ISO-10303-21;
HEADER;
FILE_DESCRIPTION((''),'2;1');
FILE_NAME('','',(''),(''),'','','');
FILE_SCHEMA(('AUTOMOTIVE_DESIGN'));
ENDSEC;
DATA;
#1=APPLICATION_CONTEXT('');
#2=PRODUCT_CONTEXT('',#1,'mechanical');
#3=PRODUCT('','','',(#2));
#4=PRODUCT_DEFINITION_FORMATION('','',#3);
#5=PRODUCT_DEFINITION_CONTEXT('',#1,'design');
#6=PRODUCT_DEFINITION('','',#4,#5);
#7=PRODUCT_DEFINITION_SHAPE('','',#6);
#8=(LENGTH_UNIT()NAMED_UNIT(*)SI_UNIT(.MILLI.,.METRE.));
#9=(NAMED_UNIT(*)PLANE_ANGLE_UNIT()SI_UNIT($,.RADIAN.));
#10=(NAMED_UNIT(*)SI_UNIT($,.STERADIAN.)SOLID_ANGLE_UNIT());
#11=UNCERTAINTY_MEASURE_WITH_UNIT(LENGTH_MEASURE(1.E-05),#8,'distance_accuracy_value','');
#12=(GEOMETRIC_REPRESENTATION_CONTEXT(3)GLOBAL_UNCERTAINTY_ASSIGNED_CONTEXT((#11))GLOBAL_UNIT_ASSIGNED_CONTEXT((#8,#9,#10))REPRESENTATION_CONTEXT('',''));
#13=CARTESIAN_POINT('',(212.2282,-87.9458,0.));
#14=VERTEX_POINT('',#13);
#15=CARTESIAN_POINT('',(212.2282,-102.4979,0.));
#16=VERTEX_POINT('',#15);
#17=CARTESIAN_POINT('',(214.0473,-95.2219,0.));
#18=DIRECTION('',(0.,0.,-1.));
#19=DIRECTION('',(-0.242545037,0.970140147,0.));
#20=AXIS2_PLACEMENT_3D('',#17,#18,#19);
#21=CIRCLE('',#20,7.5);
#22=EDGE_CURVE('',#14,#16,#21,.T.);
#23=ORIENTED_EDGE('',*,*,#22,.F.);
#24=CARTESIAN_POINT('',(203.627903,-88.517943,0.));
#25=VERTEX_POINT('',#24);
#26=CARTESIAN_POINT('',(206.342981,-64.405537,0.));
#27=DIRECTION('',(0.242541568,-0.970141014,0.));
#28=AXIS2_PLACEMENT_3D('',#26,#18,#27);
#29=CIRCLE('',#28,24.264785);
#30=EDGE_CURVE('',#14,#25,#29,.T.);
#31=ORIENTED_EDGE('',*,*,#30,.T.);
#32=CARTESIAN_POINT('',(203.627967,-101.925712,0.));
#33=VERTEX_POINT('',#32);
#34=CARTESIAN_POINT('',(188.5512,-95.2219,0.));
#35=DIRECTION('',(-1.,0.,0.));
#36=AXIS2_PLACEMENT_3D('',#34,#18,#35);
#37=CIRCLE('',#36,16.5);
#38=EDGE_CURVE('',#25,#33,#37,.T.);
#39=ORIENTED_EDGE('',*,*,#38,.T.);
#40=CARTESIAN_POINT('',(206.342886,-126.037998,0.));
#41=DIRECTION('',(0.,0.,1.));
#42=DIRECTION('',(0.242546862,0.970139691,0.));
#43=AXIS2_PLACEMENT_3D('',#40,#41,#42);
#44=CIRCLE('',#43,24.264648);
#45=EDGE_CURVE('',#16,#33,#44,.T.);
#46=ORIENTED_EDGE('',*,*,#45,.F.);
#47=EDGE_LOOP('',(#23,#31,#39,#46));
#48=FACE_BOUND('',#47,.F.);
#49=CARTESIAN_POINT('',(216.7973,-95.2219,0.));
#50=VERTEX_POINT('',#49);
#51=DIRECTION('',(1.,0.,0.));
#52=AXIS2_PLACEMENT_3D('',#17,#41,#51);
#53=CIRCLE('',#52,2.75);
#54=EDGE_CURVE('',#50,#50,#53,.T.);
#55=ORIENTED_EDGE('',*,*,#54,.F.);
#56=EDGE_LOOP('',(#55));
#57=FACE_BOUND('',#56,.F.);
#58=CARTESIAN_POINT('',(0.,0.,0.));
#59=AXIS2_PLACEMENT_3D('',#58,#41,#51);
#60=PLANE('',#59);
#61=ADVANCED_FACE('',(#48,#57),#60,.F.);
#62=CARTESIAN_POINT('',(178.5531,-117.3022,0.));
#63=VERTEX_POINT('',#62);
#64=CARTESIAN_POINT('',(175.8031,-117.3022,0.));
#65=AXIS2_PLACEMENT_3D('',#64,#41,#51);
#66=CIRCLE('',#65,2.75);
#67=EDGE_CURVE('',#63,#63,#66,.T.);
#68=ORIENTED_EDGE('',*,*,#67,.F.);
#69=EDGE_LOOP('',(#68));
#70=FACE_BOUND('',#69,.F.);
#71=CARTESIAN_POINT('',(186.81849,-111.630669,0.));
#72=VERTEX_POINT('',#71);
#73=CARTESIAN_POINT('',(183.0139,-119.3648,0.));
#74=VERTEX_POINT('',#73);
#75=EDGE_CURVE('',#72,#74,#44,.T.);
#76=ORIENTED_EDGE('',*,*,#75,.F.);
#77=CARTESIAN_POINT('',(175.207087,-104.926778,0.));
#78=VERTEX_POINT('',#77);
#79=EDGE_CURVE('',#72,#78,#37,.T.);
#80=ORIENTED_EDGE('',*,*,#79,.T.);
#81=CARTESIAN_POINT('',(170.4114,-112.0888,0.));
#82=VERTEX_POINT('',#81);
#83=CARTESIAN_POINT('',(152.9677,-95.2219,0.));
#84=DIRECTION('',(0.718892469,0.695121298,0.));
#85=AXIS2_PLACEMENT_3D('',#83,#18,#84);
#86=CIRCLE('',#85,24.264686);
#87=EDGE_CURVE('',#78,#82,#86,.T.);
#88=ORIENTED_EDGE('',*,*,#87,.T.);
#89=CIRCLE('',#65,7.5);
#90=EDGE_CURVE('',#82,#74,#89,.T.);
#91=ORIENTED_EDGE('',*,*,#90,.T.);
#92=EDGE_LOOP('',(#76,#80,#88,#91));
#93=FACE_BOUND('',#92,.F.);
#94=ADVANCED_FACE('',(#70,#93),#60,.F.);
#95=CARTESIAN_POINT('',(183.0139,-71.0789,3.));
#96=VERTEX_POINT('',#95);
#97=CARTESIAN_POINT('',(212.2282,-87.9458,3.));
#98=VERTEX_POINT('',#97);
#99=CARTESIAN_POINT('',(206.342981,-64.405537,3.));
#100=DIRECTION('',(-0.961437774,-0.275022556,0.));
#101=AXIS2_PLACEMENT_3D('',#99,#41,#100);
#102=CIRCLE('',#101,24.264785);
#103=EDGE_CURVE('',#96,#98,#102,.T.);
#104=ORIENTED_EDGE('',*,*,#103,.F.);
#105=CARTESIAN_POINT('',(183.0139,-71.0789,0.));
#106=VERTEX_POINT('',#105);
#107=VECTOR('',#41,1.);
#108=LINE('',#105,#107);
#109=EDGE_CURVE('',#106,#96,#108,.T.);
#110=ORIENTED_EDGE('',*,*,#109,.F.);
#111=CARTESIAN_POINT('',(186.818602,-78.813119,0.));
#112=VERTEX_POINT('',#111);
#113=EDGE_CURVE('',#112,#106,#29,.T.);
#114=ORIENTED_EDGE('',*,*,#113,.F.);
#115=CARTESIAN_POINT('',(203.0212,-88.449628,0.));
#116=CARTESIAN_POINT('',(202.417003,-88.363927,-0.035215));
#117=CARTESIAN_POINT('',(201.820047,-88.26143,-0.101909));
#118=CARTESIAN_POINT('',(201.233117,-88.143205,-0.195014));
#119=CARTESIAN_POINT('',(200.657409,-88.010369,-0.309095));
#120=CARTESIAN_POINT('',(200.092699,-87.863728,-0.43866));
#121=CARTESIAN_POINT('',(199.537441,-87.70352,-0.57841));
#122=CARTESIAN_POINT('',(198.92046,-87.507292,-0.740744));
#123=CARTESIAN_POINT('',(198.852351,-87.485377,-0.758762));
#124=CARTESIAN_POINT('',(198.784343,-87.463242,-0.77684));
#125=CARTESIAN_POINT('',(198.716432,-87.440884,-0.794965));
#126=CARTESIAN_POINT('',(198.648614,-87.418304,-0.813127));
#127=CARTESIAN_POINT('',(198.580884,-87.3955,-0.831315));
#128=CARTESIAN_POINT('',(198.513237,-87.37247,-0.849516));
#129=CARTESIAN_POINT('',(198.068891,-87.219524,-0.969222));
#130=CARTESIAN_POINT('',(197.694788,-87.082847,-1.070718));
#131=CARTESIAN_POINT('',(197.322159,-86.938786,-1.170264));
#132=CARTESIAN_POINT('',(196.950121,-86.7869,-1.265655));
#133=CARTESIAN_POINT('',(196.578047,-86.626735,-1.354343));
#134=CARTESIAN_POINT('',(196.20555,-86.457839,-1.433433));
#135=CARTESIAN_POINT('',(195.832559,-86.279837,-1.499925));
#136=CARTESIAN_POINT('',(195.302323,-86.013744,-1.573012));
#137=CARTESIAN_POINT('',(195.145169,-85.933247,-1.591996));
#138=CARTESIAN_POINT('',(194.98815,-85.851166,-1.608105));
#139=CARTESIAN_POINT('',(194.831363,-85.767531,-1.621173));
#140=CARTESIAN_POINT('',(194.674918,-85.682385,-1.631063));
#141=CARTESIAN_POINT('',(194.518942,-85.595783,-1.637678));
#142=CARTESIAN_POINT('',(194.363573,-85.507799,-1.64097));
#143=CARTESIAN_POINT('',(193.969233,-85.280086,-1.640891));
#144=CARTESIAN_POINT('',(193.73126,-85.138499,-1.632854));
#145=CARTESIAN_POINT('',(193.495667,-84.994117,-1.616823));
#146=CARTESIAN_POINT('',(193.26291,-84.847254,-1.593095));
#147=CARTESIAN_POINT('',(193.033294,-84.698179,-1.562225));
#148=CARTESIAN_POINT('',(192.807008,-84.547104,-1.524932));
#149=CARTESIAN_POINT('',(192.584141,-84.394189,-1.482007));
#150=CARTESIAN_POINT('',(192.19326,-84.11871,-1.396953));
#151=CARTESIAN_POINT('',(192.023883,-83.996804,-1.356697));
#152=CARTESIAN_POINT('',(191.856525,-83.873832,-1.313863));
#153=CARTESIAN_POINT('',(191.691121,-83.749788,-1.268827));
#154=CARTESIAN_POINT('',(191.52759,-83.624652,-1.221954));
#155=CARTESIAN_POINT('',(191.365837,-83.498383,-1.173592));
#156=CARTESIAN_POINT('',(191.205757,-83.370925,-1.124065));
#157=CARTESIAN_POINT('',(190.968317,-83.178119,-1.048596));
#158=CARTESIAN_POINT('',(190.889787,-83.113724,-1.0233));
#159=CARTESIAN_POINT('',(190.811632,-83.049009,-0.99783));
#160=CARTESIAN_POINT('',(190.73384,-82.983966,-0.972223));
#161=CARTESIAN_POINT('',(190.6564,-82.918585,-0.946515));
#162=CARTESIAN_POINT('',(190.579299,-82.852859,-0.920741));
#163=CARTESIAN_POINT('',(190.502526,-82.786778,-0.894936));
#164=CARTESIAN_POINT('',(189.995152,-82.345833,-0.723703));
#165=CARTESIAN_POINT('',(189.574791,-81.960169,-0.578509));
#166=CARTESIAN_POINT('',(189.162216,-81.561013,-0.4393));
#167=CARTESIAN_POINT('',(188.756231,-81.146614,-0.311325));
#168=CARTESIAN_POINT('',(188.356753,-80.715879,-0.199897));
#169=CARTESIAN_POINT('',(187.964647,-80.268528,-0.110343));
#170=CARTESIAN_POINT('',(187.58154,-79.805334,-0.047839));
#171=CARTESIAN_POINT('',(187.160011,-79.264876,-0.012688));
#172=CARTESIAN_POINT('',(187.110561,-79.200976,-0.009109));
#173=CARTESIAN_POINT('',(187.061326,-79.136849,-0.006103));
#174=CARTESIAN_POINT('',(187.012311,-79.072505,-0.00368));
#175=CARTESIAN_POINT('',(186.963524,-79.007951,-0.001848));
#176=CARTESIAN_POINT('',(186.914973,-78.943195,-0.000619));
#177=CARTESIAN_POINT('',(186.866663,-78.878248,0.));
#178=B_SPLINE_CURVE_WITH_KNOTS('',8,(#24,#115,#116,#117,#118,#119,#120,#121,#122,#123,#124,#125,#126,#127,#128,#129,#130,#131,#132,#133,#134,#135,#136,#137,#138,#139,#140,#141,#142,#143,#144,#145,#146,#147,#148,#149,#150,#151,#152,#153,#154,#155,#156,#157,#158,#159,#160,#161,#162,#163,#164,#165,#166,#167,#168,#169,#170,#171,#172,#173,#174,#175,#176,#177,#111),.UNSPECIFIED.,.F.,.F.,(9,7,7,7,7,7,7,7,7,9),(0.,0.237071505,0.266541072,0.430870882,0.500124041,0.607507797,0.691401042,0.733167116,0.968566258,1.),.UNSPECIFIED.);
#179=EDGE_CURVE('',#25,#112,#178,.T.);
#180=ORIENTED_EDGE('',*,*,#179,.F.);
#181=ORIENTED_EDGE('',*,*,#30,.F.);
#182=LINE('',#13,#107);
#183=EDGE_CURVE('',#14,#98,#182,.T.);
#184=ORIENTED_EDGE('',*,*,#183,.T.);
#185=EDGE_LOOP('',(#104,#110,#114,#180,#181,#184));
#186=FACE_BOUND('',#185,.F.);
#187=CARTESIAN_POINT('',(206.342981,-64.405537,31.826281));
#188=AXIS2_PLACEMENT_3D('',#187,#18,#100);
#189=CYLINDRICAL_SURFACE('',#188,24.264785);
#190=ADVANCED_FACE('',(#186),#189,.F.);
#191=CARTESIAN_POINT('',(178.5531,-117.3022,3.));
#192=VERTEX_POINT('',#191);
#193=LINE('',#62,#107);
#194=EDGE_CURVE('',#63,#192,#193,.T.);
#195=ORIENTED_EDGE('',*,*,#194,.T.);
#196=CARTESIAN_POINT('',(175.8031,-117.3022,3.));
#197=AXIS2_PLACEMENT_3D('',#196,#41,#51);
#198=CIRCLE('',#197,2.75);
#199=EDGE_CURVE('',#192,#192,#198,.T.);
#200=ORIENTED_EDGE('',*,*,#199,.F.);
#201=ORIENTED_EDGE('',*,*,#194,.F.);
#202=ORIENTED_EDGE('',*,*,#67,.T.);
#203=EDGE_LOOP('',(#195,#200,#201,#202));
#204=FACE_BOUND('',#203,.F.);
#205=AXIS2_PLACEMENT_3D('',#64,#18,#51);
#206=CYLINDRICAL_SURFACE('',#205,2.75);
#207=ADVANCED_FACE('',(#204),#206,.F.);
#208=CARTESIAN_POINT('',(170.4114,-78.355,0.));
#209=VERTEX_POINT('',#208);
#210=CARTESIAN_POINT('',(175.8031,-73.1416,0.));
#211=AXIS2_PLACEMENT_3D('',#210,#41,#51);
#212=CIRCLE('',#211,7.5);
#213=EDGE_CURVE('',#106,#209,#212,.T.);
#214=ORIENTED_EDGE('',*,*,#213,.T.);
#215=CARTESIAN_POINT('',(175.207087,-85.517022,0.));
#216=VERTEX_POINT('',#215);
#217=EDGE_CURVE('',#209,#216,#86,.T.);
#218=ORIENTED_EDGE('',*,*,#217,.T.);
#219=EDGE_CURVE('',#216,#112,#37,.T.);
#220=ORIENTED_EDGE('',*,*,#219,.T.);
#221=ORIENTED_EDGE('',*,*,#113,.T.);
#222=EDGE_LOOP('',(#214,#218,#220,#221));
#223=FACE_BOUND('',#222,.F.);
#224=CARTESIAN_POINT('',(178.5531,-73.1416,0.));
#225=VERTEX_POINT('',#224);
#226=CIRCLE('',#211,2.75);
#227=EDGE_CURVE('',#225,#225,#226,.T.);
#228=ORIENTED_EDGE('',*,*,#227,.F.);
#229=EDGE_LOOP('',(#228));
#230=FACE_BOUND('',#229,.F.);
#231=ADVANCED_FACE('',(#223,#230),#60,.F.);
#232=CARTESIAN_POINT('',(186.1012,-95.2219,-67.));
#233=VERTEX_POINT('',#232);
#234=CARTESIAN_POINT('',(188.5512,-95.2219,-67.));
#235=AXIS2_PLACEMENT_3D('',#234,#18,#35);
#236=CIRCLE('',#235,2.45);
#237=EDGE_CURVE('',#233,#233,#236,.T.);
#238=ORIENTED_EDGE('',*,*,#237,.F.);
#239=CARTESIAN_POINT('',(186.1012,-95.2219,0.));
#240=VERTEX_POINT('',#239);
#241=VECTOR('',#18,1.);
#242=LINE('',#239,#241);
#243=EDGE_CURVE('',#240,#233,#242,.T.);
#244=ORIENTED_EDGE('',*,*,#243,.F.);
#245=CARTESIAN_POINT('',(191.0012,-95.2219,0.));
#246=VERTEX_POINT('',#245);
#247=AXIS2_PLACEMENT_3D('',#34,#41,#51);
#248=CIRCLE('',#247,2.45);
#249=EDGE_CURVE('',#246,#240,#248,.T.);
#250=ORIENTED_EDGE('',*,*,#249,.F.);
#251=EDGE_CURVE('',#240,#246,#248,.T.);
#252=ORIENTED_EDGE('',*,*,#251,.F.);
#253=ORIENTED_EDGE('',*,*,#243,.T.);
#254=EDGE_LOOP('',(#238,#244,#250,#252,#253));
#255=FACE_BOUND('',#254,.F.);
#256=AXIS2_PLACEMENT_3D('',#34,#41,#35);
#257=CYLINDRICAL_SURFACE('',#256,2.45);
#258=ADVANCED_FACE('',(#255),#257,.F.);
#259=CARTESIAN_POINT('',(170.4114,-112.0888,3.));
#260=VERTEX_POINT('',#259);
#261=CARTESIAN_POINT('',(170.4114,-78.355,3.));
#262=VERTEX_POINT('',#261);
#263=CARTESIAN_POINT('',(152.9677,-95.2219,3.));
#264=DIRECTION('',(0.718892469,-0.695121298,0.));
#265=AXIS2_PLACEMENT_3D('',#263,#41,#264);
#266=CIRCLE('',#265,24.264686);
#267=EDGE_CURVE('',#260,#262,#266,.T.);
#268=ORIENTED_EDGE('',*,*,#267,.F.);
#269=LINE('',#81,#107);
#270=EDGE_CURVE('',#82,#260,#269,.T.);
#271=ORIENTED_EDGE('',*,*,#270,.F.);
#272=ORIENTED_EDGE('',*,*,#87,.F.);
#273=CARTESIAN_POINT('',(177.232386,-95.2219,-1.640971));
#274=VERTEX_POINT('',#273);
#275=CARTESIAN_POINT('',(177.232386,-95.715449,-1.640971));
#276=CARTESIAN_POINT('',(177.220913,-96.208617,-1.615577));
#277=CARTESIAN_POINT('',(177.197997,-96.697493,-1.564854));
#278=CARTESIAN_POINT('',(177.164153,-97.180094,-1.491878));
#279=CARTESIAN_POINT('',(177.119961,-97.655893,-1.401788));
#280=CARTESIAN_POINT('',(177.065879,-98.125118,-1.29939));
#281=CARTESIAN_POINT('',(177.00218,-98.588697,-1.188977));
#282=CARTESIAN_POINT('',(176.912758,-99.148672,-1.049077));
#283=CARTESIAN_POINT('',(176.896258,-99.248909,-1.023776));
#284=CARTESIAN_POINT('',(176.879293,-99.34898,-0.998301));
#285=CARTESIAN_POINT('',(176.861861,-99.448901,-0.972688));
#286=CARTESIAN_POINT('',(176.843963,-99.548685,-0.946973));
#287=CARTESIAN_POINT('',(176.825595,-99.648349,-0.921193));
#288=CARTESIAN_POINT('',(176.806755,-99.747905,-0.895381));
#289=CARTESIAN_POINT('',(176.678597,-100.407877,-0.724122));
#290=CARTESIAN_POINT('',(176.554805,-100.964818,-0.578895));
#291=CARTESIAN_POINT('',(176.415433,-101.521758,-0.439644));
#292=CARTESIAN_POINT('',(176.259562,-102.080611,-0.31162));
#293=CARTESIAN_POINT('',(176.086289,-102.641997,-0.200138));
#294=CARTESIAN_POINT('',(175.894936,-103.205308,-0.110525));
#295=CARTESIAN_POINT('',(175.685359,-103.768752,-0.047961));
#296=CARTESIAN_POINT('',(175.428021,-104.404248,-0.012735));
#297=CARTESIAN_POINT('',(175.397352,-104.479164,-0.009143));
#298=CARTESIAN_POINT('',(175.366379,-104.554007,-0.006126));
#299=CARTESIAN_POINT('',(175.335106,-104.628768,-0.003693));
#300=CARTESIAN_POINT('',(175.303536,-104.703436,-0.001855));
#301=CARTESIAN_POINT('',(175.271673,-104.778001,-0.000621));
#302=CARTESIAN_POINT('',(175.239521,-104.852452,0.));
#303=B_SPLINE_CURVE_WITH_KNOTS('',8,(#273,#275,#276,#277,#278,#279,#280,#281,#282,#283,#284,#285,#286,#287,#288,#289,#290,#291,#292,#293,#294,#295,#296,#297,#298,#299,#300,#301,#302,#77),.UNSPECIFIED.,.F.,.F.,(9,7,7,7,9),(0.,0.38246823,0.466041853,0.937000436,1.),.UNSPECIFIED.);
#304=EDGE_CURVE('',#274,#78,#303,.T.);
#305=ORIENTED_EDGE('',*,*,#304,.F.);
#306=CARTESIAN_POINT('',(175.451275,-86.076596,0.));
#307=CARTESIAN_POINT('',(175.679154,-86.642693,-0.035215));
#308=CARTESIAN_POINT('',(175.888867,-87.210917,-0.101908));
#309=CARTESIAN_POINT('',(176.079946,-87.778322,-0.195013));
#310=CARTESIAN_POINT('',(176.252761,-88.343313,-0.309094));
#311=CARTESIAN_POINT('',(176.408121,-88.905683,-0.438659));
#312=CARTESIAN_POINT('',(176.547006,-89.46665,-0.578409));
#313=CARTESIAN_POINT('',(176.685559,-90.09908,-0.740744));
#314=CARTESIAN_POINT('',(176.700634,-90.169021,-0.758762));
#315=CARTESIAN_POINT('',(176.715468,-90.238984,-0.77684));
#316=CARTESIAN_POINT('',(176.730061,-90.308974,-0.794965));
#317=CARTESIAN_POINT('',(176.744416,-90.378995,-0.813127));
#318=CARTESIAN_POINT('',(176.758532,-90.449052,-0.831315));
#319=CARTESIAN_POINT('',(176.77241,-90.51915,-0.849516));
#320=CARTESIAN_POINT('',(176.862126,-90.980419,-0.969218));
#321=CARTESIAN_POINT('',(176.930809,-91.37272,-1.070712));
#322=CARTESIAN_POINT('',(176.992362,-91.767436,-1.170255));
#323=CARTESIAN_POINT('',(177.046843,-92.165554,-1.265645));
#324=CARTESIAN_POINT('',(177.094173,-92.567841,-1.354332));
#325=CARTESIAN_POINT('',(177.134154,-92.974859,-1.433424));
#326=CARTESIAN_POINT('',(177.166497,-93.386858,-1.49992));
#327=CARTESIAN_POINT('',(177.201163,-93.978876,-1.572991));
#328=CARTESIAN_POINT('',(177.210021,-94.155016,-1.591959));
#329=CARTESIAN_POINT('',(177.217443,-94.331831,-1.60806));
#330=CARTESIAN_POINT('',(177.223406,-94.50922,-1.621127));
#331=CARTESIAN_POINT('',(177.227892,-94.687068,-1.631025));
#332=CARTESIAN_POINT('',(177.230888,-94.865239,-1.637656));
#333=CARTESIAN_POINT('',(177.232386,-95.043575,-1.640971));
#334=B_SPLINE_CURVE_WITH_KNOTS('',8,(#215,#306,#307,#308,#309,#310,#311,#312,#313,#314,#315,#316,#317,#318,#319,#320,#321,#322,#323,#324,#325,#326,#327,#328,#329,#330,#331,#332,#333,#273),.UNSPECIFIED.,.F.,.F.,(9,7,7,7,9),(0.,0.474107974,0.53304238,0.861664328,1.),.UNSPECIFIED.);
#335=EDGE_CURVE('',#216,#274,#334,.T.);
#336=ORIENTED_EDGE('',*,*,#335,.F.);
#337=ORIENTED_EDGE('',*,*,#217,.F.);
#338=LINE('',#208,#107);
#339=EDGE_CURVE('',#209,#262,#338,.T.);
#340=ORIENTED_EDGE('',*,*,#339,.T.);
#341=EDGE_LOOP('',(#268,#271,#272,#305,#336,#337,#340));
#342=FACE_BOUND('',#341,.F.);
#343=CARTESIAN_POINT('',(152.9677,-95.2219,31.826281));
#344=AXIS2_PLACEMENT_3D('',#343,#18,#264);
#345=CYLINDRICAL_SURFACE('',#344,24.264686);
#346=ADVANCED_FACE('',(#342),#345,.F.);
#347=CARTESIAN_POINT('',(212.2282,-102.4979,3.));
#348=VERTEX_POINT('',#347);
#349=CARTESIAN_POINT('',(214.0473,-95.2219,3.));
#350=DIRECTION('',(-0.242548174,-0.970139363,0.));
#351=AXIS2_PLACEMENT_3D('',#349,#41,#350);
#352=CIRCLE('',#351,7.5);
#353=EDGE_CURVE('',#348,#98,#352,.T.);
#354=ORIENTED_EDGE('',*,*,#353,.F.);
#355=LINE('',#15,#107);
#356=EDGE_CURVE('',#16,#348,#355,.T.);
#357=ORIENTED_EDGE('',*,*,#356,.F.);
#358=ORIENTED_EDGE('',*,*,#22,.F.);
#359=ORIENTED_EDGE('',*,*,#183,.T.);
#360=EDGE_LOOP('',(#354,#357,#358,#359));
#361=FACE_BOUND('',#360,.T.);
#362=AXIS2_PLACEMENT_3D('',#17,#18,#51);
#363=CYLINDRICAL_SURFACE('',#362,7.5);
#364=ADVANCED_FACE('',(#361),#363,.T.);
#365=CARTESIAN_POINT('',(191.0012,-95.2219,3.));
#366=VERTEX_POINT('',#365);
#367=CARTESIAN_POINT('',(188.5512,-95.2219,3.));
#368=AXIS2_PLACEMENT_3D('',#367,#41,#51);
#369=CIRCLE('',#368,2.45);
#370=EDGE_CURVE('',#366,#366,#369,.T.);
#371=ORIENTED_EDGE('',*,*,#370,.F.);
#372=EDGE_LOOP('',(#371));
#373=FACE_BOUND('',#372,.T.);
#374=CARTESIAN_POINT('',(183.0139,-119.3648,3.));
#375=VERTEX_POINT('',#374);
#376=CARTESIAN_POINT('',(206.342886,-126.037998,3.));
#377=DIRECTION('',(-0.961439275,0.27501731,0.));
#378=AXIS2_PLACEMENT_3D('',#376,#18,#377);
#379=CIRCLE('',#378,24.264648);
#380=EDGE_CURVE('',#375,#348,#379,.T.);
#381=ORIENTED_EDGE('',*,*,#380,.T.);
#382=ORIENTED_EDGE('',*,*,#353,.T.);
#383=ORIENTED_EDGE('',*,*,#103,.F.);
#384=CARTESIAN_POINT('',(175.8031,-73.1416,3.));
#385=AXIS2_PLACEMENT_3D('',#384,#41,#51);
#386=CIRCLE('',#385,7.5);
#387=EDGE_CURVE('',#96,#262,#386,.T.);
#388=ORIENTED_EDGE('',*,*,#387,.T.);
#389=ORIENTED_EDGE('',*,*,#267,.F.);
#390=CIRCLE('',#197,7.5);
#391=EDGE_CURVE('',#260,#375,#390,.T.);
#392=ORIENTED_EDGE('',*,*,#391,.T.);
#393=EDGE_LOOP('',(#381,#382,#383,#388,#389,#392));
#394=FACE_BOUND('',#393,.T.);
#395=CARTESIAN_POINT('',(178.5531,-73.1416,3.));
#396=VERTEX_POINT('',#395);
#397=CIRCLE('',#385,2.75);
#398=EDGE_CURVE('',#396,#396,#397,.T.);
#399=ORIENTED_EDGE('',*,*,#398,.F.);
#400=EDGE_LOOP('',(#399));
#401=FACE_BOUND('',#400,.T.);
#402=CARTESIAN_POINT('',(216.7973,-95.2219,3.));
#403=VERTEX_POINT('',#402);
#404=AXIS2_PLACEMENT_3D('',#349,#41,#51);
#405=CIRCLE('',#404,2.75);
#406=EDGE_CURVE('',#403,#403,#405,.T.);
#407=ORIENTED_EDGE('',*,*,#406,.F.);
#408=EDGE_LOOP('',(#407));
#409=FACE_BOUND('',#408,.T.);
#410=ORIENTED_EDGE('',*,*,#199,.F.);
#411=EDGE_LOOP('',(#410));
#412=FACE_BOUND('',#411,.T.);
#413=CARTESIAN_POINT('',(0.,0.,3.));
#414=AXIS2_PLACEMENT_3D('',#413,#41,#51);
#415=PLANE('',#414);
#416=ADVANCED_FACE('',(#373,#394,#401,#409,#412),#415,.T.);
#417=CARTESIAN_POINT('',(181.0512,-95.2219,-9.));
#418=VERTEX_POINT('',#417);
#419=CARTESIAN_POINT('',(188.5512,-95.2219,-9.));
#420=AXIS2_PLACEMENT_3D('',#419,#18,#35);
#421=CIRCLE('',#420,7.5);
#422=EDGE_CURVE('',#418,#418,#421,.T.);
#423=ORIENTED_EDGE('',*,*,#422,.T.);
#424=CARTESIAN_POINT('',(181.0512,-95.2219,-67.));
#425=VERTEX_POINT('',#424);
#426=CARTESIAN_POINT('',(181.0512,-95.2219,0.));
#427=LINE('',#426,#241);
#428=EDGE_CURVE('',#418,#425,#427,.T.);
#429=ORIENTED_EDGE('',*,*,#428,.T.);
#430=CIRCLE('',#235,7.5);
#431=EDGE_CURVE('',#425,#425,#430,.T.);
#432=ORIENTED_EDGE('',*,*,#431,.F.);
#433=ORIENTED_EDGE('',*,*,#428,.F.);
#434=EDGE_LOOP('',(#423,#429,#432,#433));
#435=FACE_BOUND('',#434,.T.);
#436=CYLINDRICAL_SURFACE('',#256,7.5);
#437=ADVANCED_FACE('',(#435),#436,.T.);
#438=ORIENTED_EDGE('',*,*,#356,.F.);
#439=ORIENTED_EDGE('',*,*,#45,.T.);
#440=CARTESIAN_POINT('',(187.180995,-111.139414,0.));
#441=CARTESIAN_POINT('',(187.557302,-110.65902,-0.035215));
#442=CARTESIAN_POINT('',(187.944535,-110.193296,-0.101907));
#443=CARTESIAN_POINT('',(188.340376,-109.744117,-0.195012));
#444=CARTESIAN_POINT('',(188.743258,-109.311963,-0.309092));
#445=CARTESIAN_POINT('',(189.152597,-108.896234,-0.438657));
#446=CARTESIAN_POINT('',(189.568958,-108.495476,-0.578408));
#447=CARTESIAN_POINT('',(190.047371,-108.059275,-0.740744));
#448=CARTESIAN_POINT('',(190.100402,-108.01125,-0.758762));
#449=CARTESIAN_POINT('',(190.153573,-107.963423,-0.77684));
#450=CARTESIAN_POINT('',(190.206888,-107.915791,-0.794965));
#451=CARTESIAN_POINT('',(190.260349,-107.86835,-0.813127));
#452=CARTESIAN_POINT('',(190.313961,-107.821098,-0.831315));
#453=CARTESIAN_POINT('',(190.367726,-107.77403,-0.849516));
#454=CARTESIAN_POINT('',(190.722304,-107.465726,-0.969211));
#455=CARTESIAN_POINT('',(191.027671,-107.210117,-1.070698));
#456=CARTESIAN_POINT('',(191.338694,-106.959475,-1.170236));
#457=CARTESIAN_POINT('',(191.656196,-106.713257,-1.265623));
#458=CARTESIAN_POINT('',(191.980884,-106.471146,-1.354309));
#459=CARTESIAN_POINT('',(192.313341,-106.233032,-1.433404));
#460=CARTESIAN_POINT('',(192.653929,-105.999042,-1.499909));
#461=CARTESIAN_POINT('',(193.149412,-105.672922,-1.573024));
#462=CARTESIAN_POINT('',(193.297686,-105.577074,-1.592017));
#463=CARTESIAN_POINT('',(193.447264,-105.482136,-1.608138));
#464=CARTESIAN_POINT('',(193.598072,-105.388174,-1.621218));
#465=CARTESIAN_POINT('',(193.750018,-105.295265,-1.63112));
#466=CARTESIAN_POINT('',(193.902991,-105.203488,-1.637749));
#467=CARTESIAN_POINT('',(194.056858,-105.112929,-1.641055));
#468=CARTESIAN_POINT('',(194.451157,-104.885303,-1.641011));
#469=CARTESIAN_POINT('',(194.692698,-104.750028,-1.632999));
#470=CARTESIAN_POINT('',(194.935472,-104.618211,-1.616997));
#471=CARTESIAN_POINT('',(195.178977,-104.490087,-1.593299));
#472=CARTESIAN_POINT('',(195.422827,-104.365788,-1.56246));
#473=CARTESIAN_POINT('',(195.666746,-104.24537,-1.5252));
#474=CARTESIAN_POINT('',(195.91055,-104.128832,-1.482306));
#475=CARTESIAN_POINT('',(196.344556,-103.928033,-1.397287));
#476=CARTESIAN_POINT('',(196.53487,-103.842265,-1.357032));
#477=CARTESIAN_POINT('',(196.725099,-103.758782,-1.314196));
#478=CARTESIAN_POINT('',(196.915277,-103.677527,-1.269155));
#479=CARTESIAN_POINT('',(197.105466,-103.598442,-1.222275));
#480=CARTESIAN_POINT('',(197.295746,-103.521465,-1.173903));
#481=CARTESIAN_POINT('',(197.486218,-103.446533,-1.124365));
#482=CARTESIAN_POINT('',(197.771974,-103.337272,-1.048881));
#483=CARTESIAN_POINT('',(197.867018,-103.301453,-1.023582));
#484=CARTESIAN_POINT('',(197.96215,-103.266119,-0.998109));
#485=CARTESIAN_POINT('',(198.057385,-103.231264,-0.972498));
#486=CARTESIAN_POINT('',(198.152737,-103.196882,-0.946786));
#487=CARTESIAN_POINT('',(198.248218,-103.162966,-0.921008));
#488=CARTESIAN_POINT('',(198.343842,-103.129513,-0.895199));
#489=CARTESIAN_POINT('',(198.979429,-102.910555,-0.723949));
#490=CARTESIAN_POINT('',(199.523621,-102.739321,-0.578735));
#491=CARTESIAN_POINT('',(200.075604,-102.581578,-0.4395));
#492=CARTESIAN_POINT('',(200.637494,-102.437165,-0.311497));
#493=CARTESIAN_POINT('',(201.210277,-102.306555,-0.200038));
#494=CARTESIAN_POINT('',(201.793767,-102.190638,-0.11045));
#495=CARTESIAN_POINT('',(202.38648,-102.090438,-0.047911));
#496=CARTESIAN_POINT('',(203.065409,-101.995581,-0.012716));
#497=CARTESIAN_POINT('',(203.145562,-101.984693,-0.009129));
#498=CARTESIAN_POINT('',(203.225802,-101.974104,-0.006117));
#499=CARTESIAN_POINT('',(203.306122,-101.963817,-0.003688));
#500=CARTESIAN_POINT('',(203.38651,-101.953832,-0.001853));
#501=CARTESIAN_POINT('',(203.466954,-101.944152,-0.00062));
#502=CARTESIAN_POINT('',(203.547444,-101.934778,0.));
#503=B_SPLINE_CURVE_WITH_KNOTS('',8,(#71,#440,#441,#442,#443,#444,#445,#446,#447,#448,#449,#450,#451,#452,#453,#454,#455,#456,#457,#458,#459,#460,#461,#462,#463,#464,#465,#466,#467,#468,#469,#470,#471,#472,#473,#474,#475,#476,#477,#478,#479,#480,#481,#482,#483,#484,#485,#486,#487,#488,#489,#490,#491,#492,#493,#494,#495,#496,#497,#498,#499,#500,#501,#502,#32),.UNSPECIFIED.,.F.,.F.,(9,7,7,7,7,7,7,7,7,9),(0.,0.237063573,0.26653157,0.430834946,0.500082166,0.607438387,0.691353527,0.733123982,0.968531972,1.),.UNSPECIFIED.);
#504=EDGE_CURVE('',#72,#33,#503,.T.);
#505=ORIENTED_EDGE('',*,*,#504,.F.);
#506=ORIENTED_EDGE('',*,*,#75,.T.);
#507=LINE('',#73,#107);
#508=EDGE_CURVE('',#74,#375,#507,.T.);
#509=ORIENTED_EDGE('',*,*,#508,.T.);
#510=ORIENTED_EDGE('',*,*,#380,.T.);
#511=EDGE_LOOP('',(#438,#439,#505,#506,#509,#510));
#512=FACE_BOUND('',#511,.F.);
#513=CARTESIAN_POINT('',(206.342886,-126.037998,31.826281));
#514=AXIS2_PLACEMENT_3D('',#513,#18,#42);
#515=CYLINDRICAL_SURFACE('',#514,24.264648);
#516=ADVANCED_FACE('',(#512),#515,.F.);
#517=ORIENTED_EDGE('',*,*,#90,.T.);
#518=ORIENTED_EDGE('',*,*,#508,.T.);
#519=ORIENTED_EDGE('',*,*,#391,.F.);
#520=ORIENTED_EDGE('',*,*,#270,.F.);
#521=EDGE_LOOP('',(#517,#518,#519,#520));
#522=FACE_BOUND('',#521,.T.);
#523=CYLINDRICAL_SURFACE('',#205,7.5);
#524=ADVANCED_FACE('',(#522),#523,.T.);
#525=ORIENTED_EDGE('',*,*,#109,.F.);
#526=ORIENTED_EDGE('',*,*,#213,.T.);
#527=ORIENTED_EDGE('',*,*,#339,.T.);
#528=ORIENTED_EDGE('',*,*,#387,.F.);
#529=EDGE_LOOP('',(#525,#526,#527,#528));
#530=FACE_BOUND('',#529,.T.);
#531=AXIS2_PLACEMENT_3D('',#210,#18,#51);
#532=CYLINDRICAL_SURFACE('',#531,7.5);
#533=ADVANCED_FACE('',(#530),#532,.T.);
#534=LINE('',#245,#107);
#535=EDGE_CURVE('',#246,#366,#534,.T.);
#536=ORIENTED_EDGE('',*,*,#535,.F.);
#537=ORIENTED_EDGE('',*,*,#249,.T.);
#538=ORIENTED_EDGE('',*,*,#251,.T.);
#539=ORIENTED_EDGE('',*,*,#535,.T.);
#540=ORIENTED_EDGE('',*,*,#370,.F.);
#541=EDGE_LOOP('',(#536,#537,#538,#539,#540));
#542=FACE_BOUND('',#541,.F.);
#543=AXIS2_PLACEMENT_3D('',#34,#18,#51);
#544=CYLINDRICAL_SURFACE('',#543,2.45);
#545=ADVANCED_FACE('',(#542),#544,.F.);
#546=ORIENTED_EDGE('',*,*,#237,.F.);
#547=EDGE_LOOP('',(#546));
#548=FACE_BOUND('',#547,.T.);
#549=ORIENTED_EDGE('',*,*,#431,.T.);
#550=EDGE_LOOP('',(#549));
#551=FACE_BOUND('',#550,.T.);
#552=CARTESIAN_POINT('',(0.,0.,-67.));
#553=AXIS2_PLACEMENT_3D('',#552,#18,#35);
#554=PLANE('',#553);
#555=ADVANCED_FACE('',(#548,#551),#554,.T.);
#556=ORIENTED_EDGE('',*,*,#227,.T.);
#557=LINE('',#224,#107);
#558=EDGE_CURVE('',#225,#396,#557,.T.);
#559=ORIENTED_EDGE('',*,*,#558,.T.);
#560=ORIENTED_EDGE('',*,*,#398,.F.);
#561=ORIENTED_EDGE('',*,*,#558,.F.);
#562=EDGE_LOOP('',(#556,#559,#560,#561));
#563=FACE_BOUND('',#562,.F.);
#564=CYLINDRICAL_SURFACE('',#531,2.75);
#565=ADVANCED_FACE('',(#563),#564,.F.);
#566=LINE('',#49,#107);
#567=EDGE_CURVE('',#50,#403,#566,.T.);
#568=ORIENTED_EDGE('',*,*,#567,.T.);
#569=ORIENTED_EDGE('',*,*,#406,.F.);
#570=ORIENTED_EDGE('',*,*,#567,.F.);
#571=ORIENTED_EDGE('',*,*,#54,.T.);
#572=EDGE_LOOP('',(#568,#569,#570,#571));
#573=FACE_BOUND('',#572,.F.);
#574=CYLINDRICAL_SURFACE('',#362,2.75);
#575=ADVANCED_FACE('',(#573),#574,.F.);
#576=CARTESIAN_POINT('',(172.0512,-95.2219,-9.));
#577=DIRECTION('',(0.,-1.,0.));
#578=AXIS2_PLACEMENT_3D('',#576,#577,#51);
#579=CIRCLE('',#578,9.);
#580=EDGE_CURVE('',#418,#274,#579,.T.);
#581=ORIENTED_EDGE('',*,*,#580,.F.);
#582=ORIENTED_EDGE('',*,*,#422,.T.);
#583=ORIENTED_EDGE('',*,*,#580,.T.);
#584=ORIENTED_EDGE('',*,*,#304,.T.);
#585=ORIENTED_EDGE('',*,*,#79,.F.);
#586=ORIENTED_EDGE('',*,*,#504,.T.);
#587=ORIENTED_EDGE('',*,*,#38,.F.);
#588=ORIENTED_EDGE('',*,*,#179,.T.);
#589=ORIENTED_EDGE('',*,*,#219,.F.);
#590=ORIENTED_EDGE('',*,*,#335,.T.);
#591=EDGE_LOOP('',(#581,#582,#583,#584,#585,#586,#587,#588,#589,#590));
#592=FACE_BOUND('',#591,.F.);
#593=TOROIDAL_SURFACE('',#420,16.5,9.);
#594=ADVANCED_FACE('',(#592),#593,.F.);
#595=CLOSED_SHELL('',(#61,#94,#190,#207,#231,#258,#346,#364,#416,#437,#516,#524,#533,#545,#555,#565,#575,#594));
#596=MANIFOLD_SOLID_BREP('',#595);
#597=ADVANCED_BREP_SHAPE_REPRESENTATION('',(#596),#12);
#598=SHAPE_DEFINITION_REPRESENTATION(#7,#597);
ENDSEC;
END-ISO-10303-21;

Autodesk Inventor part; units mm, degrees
ref_plane "YZ Plane" through (0, 0, 0) normal (1, 0, 0) x (0, 1, 0)
ref_plane "XZ Plane" through (0, 0, 0) normal (0, 1, 0) x (-1, 0, 0)
ref_plane "XY Plane" through (0, 0, 0) normal (0, 0, 1) x (1, 0, 0)
sketch "Block1" plane through (0, 0, 0) normal (0, 0, 1) x (1, 0, 0)
  arc A0 (51.9869, 17.514) -> (51.7404, 14.6963) centre (53.2724, 15.9819) ccw
  arc A1 (68.7213, 13.3186) -> (65.2964, 25.2266) centre (0, 0) ccw
  arc A2 (61.6287, -6.0233) -> (58.811, -6.2699) centre (60.3431, -7.5554) ccw
  arc A3 (61.6287, -6.0233) -> (58.811, -6.2699) centre (60.3431, -7.5554) ccw
  line L0 (61.6287, -6.0233) -> (68.0434, -11.4059)
  line L1 (51.7404, -14.6963) -> (58.811, -6.2699)
  arc A4 (68.7213, -13.3186) -> (68.0434, -11.4059) centre (66.7578, -12.938) ccw
  arc A5 (68.7213, -13.3186) -> (68.0434, -11.4059) centre (66.7578, -12.938) ccw
  arc A6 (51.7404, -14.6963) -> (51.9869, -17.514) centre (53.2724, -15.9819) ccw
  line L2 (62.1452, -26.0379) -> (51.9869, -17.514)
  arc A7 (65.2964, -25.2266) -> (68.7213, -13.3186) centre (0, 0) ccw
  line L3 (68.0434, -11.4059) -> (61.6287, -6.0233)
  arc A8 (62.1452, -26.0379) -> (65.2964, -25.2266) centre (63.4308, -24.5058) ccw
  arc A9 (62.1452, -26.0379) -> (65.2964, -25.2266) centre (63.4308, -24.5058) ccw
  line L4 (36.4337, -56.6797) -> (26.2754, -48.1558)
  line L5 (26.2754, -48.1558) -> (36.4337, -56.6797)
  arc A10 (25.0495, -65.3645) -> (36.1819, -59.9239) centre (0, 0) ccw
  arc A11 (36.1819, -59.9239) -> (36.4337, -56.6797) centre (35.1481, -58.2118) ccw
  arc A12 (36.1819, -59.9239) -> (36.4337, -56.6797) centre (35.1481, -58.2118) ccw
  arc A13 (36.1819, -59.9239) -> (65.2964, -25.2266) centre (0, 0) ccw
  arc A14 (-51.082, -35) -> (-49.082, -33) centre (-51.082, -33) ccw
  line L6 (-49.082, -33) -> (-49.082, -22)
  arc A15 (-66.2353, -22.6471) -> (-61.2046, -33.9706) centre (0, 0) ccw
  line L7 (-49.082, -22) -> (-49.082, -33)
  arc A16 (-51.082, -35) -> (-49.082, -33) centre (-51.082, -33) ccw
  line L8 (-59.4559, -35) -> (-51.082, -35)
  line L9 (-51.082, -35) -> (-59.4559, -35)
  arc A17 (-61.2046, -33.9706) -> (-59.4559, -35) centre (-59.4559, -33) ccw
  arc A18 (-61.2046, -33.9706) -> (-59.4559, -35) centre (-59.4559, -33) ccw
  arc A19 (-49.082, 33) -> (-51.082, 35) centre (-51.082, 33) ccw
  line L10 (-29.1457, 1.2495) -> (-29.1457, -3.1905)
  circle A20 centre (-12.7481, 22.0803) radius 2.75
  arc A21 (25.0495, 65.3645) -> (-61.2046, 33.9706) centre (0, 0) ccw
  circle A22 centre (25.4961, 0) radius 2.75
  line L11 (22.9771, 23.4574) -> (25.8311, 20.0561)
  arc A23 (23.4577, 48.4023) -> (26.2754, 48.1558) centre (24.9898, 49.6879) ccw
  arc A24 (23.4577, 48.4023) -> (26.2754, 48.1558) centre (24.9898, 49.6879) ccw
  arc A25 (16.6335, 59.6465) -> (16.387, 56.8288) centre (17.9191, 58.1144) ccw
  line L12 (16.387, 56.8288) -> (23.4577, 48.4023)
  line L13 (23.4577, 48.4023) -> (16.387, 56.8288)
  arc A26 (-49.082, -22) -> (-51.082, -20) centre (-51.082, -22) ccw
  line L14 (-51.082, -20) -> (-64.3428, -20)
  arc A27 (-64.3428, -20) -> (-66.2353, -22.6471) centre (-64.3428, -22) ccw
  line L15 (-51.082, 20) -> (-64.3428, 20)
  arc A28 (-51.082, 20) -> (-49.082, 22) centre (-51.082, 22) ccw
  arc A29 (-66.2353, 22.6471) -> (-64.3428, 20) centre (-64.3428, 22) ccw
  arc A30 (-66.2353, 22.6471) -> (-64.3428, 20) centre (-64.3428, 22) ccw
  arc A31 (-49.082, -22) -> (-51.082, -20) centre (-51.082, -22) ccw
  line L16 (-64.3428, -20) -> (-51.082, -20)
  arc A32 (-66.2353, 22.6471) -> (-66.2353, -22.6471) centre (0, 0) ccw
  arc A33 (-64.3428, -20) -> (-66.2353, -22.6471) centre (-64.3428, -22) ccw
  line L17 (-64.3428, 20) -> (-51.082, 20)
  line L18 (-49.082, 22) -> (-49.082, 33)
  line L19 (-51.082, 35) -> (-59.4559, 35)
  arc A34 (-59.4559, 35) -> (-61.2046, 33.9706) centre (-59.4559, 33) ccw
  arc A35 (-51.082, 20) -> (-49.082, 22) centre (-51.082, 22) ccw
  line L20 (51.9869, -17.514) -> (62.1452, -26.0379)
  arc A36 (51.7404, -14.6963) -> (51.9869, -17.514) centre (53.2724, -15.9819) ccw
  line L21 (58.811, -6.2699) -> (51.7404, -14.6963)
  line L22 (62.1452, 26.0379) -> (51.9869, 17.514)
  arc A37 (65.2964, 25.2266) -> (62.1452, 26.0379) centre (63.4308, 24.5058) ccw
  arc A38 (65.2964, 25.2266) -> (62.1452, 26.0379) centre (63.4308, 24.5058) ccw
  line L23 (26.2754, 48.1558) -> (36.4337, 56.6797)
  line L24 (36.4337, 56.6797) -> (26.2754, 48.1558)
  arc A39 (36.1819, 59.9239) -> (25.0495, 65.3645) centre (0, 0) ccw
  arc A40 (36.4337, 56.6797) -> (36.1819, 59.9239) centre (35.1481, 58.2118) ccw
  arc A41 (36.4337, 56.6797) -> (36.1819, 59.9239) centre (35.1481, 58.2118) ccw
  arc A42 (65.2964, 25.2266) -> (36.1819, 59.9239) centre (0, 0) ccw
  line L25 (51.9869, 17.514) -> (62.1452, 26.0379)
  arc A43 (-61.2046, 33.9706) -> (-66.2353, 22.6471) centre (0, 0) ccw
  line L26 (-49.082, 33) -> (-49.082, 22)
  arc A44 (-59.4559, 35) -> (-61.2046, 33.9706) centre (-59.4559, 33) ccw
  line L27 (-59.4559, 35) -> (-51.082, 35)
  arc A45 (-49.082, 33) -> (-51.082, 35) centre (-51.082, 33) ccw
  arc A46 (16.387, -56.8288) -> (16.6335, -59.6465) centre (17.9191, -58.1144) ccw
  line L28 (16.6335, -59.6465) -> (23.0483, -65.029)
  arc A47 (23.0483, -65.029) -> (25.0495, -65.3645) centre (24.3338, -63.497) ccw
  arc A48 (26.2754, -48.1558) -> (23.4577, -48.4023) centre (24.9898, -49.6879) ccw
  line L29 (23.4577, -48.4023) -> (16.387, -56.8288)
  arc A49 (-61.2046, -33.9706) -> (25.0495, -65.3645) centre (0, 0) ccw
  arc A50 (16.387, -56.8288) -> (16.6335, -59.6465) centre (17.9191, -58.1144) ccw
  line L30 (23.0483, -65.029) -> (16.6335, -59.6465)
  arc A51 (23.0483, -65.029) -> (25.0495, -65.3645) centre (24.3338, -63.497) ccw
  line L31 (16.387, -56.8288) -> (23.4577, -48.4023)
  arc A52 (26.2754, -48.1558) -> (23.4577, -48.4023) centre (24.9898, -49.6879) ccw
  circle A53 centre (-12.7481, -22.0803) radius 2.75
  arc A54 (16.6335, 59.6465) -> (16.387, 56.8288) centre (17.9191, 58.1144) ccw
  line L32 (23.0483, 65.029) -> (16.6335, 59.6465)
  line L33 (16.6335, 59.6465) -> (23.0483, 65.029)
  arc A55 (25.0495, 65.3645) -> (23.0483, 65.029) centre (24.3338, 63.497) ccw
  arc A56 (25.0495, 65.3645) -> (23.0483, 65.029) centre (24.3338, 63.497) ccw
  arc A57 (58.811, 6.2699) -> (61.6287, 6.0233) centre (60.3431, 7.5554) ccw
  line L34 (61.6287, 6.0233) -> (68.0434, 11.4059)
  arc A58 (68.7213, -13.3186) -> (68.7213, 13.3186) centre (0, 0) ccw
  arc A59 (58.811, 6.2699) -> (61.6287, 6.0233) centre (60.3431, 7.5554) ccw
  line L35 (68.0434, 11.4059) -> (61.6287, 6.0233)
  arc A60 (68.0434, 11.4059) -> (68.7213, 13.3186) centre (66.7578, 12.938) ccw
  arc A61 (68.0434, 11.4059) -> (68.7213, 13.3186) centre (66.7578, 12.938) ccw
  line L36 (51.7404, 14.6963) -> (58.811, 6.2699)
  arc A62 (51.9869, 17.514) -> (51.7404, 14.6963) centre (53.2724, 15.9819) ccw
  line L37 (58.811, 6.2699) -> (51.7404, 14.6963)
  point P0 (9.241, 0.2297)
sketch "Block2" plane through (0, 0, 0) normal (0, 0, 1) x (1, 0, 0)
  line L0 (151.5687, -148.5392) -> (143.1948, -148.5392)
  arc A0 (141.4461, -147.5098) -> (143.1948, -148.5392) centre (143.1948, -146.5392) ccw
  line L1 (254.391, -128.2355) -> (261.4617, -119.809)
  arc A1 (254.391, -128.2355) -> (254.6376, -131.0532) centre (255.9231, -129.5211) ccw
  line L2 (264.7959, -139.5771) -> (254.6376, -131.0532)
  arc A2 (264.7959, -139.5771) -> (267.9471, -138.7657) centre (266.0815, -138.045) ccw
  circle A3 centre (228.1468, -113.5392) radius 2.75
  arc A4 (228.9261, -161.695) -> (226.1084, -161.9415) centre (227.6405, -163.227) ccw
  line L3 (228.9261, -161.695) -> (239.0844, -170.2188)
  arc A5 (238.8326, -173.463) -> (267.9471, -138.7657) centre (202.6507, -113.5392) ccw
  arc A6 (238.8326, -173.463) -> (239.0844, -170.2188) centre (237.7988, -171.7509) ccw
  circle A7 centre (189.9026, -135.6195) radius 2.75
  line L4 (153.5687, -135.5392) -> (153.5687, -146.5392)
  line L5 (158.5687, -148.5392) -> (158.5687, -139.2292)
  line L6 (158.5687, -148.5392) -> (148.1948, -148.5392)
  arc A8 (151.5687, -148.5392) -> (153.5687, -146.5392) centre (151.5687, -146.5392) ccw
  line L7 (174.6507, -139.2292) -> (174.6507, -152.5392)
  line L8 (174.6507, -152.5392) -> (148.1948, -152.5392)
  line L9 (179.6507, -152.5392) -> (179.6507, -139.2292)
  line L10 (148.1948, -152.5392) -> (148.1948, -148.5392)
  arc A9 (143.1948, -78.5392) -> (141.4461, -79.5686) centre (143.1948, -80.5392) ccw
  arc A10 (153.5687, -135.5392) -> (151.5687, -133.5392) centre (151.5687, -135.5392) ccw
  line L11 (138.3079, -133.5392) -> (151.5687, -133.5392)
  arc A11 (138.3079, -133.5392) -> (136.4154, -136.1862) centre (138.3079, -135.5392) ccw
  line L12 (151.5687, -93.5392) -> (138.3079, -93.5392)
  arc A12 (136.4154, -90.8921) -> (136.4154, -136.1862) centre (202.6507, -113.5392) ccw
  arc A13 (136.4154, -90.8921) -> (138.3079, -93.5392) centre (138.3079, -91.5392) ccw
  arc A14 (151.5687, -93.5392) -> (153.5687, -91.5392) centre (151.5687, -91.5392) ccw
  line L13 (143.1948, -78.5392) -> (151.5687, -78.5392)
  arc A15 (153.5687, -80.5392) -> (151.5687, -78.5392) centre (151.5687, -80.5392) ccw
  line L14 (153.5687, -80.5392) -> (153.5687, -91.5392)
  line L15 (158.5687, -139.2292) -> (174.6507, -139.2292)
  arc A16 (254.6376, -96.0252) -> (254.391, -98.8428) centre (255.9231, -97.5572) ccw
  line L16 (254.6376, -96.0252) -> (264.7959, -87.5013)
  arc A17 (267.9471, -88.3126) -> (264.7959, -87.5013) centre (266.0815, -89.0334) ccw
  line L17 (219.9377, -94.8563) -> (222.7917, -98.2575)
  arc A18 (226.1084, -65.1369) -> (228.9261, -65.3834) centre (227.6405, -63.8513) ccw
  arc A19 (267.9471, -88.3126) -> (238.8326, -53.6153) centre (202.6507, -113.5392) ccw
  arc A20 (239.0844, -56.8595) -> (238.8326, -53.6153) centre (237.7988, -55.3274) ccw
  line L18 (239.0844, -56.8595) -> (228.9261, -65.3834)
  line L19 (226.1084, -65.1369) -> (219.0377, -56.7104)
  arc A21 (264.2794, -119.5625) -> (261.4617, -119.809) centre (262.9938, -121.0946) ccw
  line L20 (264.2794, -119.5625) -> (270.6941, -124.9451)
  arc A22 (271.372, -126.8577) -> (270.6941, -124.9451) centre (269.4085, -126.4772) ccw
  arc A23 (261.4617, -107.2693) -> (264.2794, -107.5158) centre (262.9938, -105.9837) ccw
  arc A24 (271.372, -126.8577) -> (271.372, -100.2206) centre (202.6507, -113.5392) ccw
  line L21 (261.4617, -107.2693) -> (254.391, -98.8428)
  line L22 (270.6941, -102.1332) -> (264.2794, -107.5158)
  arc A25 (270.6941, -102.1332) -> (271.372, -100.2206) centre (269.4085, -100.6011) ccw
  circle A26 centre (189.9026, -91.4589) radius 2.75
  line L23 (188.3917, -112.2896) -> (188.3917, -116.7296)
  line L24 (219.2842, -53.8927) -> (225.699, -48.5101)
  arc A27 (227.7002, -48.1746) -> (225.699, -48.5101) centre (226.9845, -50.0422) ccw
  arc A28 (227.7002, -48.1746) -> (141.4461, -79.5686) centre (202.6507, -113.5392) ccw
  arc A29 (219.2842, -53.8927) -> (219.0377, -56.7104) centre (220.5698, -55.4248) ccw
  line L25 (219.2976, -48.6599) -> (221.8687, -51.7241)
  line L26 (213.9219, -58.3922) -> (221.8687, -51.7241)
  line L27 (213.9219, -58.3922) -> (219.9063, -65.5241)
  line L28 (219.9063, -65.5241) -> (207.5867, -75.8614)
  line L29 (213.4899, -70.908) -> (204.9344, -60.712)
  line L30 (199.0312, -65.6654) -> (219.2976, -48.6599)
  line L31 (207.5867, -75.8614) -> (199.0312, -65.6654)
  line L32 (195.201, -68.8793) -> (203.7565, -79.0754)
  arc A30 (141.4461, -147.5098) -> (227.7002, -178.9037) centre (202.6507, -113.5392) ccw
  line L33 (207.5867, -151.2169) -> (199.0312, -161.413)
  line L34 (213.4899, -156.1703) -> (204.9344, -166.3663)
  line L35 (219.9063, -161.5542) -> (207.5867, -151.2169)
  line L36 (213.9219, -168.6861) -> (219.9063, -161.5542)
  arc A31 (219.0377, -170.368) -> (219.2842, -173.1856) centre (220.5698, -171.6535) ccw
  line L37 (199.0312, -161.413) -> (219.2976, -178.4185)
  line L38 (213.9219, -168.6861) -> (221.8687, -175.3543)
  line L39 (219.2976, -178.4185) -> (221.8687, -175.3543)
  line L40 (219.0377, -170.368) -> (226.1084, -161.9415)
  line L41 (225.699, -178.5682) -> (219.2842, -173.1856)
  arc A32 (225.699, -178.5682) -> (227.7002, -178.9037) centre (226.9845, -177.0361) ccw
  line L42 (195.201, -158.199) -> (203.7565, -148.003)
  point P0 (207.2921, -116.2358)
sketch "Sketch1" plane through (0, 0, 0) normal (0, 0, 1) x (1, 0, 0)
  circle A0 centre (188.5512, -95.2219) radius 70
  circle A1 centre (214.0473, -95.2219) radius 2.75
  circle A2 centre (175.8031, -117.3022) radius 2.75
  circle A3 centre (175.8031, -73.1416) radius 2.75
  line L0 (205.1847, -35.5754) -> (211.5995, -30.1928)
  arc A4 (213.6007, -29.8573) -> (211.5995, -30.1928) centre (212.885, -31.7249) ccw
  arc A5 (213.6007, -29.8573) -> (127.3466, -61.2513) centre (188.5512, -95.2219) ccw
  arc A6 (129.0953, -60.2219) -> (127.3466, -61.2513) centre (129.0953, -62.2219) ccw
  line L1 (129.0953, -60.2219) -> (137.4691, -60.2219)
  arc A7 (139.4691, -62.2219) -> (137.4691, -60.2219) centre (137.4691, -62.2219) ccw
  line L2 (139.4691, -62.2219) -> (139.4691, -73.2219)
  arc A8 (137.4691, -75.2219) -> (139.4691, -73.2219) centre (137.4691, -73.2219) ccw
  line L3 (137.4691, -75.2219) -> (124.2084, -75.2219)
  arc A9 (122.3159, -72.5748) -> (124.2084, -75.2219) centre (124.2084, -73.2219) ccw
  arc A10 (122.3159, -72.5748) -> (122.3159, -117.8689) centre (188.5512, -95.2219) ccw
  arc A11 (124.2084, -115.2219) -> (122.3159, -117.8689) centre (124.2084, -117.2219) ccw
  line L4 (124.2084, -115.2219) -> (137.4691, -115.2219)
  arc A12 (139.4691, -117.2219) -> (137.4691, -115.2219) centre (137.4691, -117.2219) ccw
  line L5 (139.4691, -117.2219) -> (139.4691, -128.2219)
  arc A13 (137.4691, -130.2219) -> (139.4691, -128.2219) centre (137.4691, -128.2219) ccw
  line L6 (137.4691, -130.2219) -> (129.0953, -130.2219)
  arc A14 (127.3466, -129.1925) -> (129.0953, -130.2219) centre (129.0953, -128.2219) ccw
  arc A15 (127.3466, -129.1925) -> (213.6007, -160.5864) centre (188.5512, -95.2219) ccw
  arc A16 (211.5995, -160.2509) -> (213.6007, -160.5864) centre (212.885, -158.7188) ccw
  line L7 (211.5995, -160.2509) -> (205.1847, -154.8683)
  arc A17 (204.9382, -152.0507) -> (205.1847, -154.8683) centre (206.4703, -153.3362) ccw
  line L8 (204.9382, -152.0507) -> (212.0089, -143.6242)
  arc A18 (214.8265, -143.3777) -> (212.0089, -143.6242) centre (213.541, -144.9097) ccw
  line L9 (214.8265, -143.3777) -> (224.9849, -151.9015)
  arc A19 (224.7331, -155.1457) -> (224.9849, -151.9015) centre (223.6993, -153.4336) ccw
  arc A20 (224.7331, -155.1457) -> (253.8476, -120.4484) centre (188.5512, -95.2219) ccw
  arc A21 (250.6964, -121.2598) -> (253.8476, -120.4484) centre (251.982, -119.7277) ccw
  line L10 (250.6964, -121.2598) -> (240.5381, -112.7359)
  arc A22 (240.2915, -109.9182) -> (240.5381, -112.7359) centre (241.8236, -111.2038) ccw
  line L11 (240.2915, -109.9182) -> (247.3622, -101.4917)
  arc A23 (250.1799, -101.2452) -> (247.3622, -101.4917) centre (248.8943, -102.7773) ccw
  line L12 (250.1799, -101.2452) -> (256.5946, -106.6278)
  arc A24 (257.2725, -108.5404) -> (256.5946, -106.6278) centre (255.309, -108.1599) ccw
  arc A25 (257.2725, -108.5404) -> (257.2725, -81.9033) centre (188.5512, -95.2219) ccw
  arc A26 (256.5946, -83.8159) -> (257.2725, -81.9033) centre (255.309, -82.2838) ccw
  line L13 (256.5946, -83.8159) -> (250.1799, -89.1985)
  arc A27 (247.3622, -88.952) -> (250.1799, -89.1985) centre (248.8943, -87.6664) ccw
  line L14 (247.3622, -88.952) -> (240.2915, -80.5255)
  arc A28 (240.5381, -77.7079) -> (240.2915, -80.5255) centre (241.8236, -79.2399) ccw
  line L15 (240.5381, -77.7079) -> (250.6964, -69.184)
  arc A29 (253.8476, -69.9953) -> (250.6964, -69.184) centre (251.982, -70.7161) ccw
  arc A30 (253.8476, -69.9953) -> (224.7331, -35.298) centre (188.5512, -95.2219) ccw
  arc A31 (224.9849, -38.5422) -> (224.7331, -35.298) centre (223.6993, -37.0101) ccw
  line L16 (224.9849, -38.5422) -> (214.8265, -47.0661)
  arc A32 (212.0089, -46.8196) -> (214.8265, -47.0661) centre (213.541, -45.534) ccw
  line L17 (212.0089, -46.8196) -> (204.9382, -38.3931)
  arc A33 (205.1847, -35.5754) -> (204.9382, -38.3931) centre (206.4703, -37.1075) ccw
  line L18 (181.1015, -50.562) -> (189.657, -60.7581)
  line L19 (199.3904, -52.5907) -> (190.8349, -42.3947)
  line L20 (193.4872, -57.5441) -> (184.9317, -47.3481)
  line L21 (205.8068, -47.2068) -> (193.4872, -57.5441)
  line L22 (199.8224, -40.0749) -> (205.8068, -47.2068)
  line L23 (199.8224, -40.0749) -> (207.7692, -33.4068)
  line L24 (205.1981, -30.3426) -> (207.7692, -33.4068)
  line L25 (184.9317, -47.3481) -> (205.1981, -30.3426)
  line L26 (160.5512, -120.9119) -> (160.5512, -134.2219)
  line L27 (144.4691, -120.9119) -> (160.5512, -120.9119)
  line L28 (144.4691, -130.2219) -> (144.4691, -120.9119)
  line L29 (144.4691, -130.2219) -> (134.0953, -130.2219)
  line L30 (134.0953, -134.2219) -> (134.0953, -130.2219)
  line L31 (160.5512, -134.2219) -> (134.0953, -134.2219)
  line L32 (199.3904, -137.853) -> (190.8349, -148.049)
  line L33 (193.4872, -132.8996) -> (184.9317, -143.0956)
  line L34 (184.9317, -143.0956) -> (205.1981, -160.1012)
  line L35 (205.1981, -160.1012) -> (207.7692, -157.037)
  line L36 (199.8224, -150.3688) -> (207.7692, -157.037)
  line L37 (199.8224, -150.3688) -> (205.8068, -143.2369)
  line L38 (205.8068, -143.2369) -> (193.4872, -132.8996)
  line L39 (181.1015, -139.8817) -> (189.657, -129.6857)
  line L40 (165.5512, -134.2219) -> (165.5512, -120.9119)
  line L41 (205.8382, -76.539) -> (208.6922, -79.9402)
  line L42 (174.2922, -93.9723) -> (174.2922, -98.4123)
  circle A34 centre (175.8031, -73.1416) radius 7.5
  circle A35 centre (214.0473, -95.2219) radius 7.5
  circle A36 centre (175.8031, -117.3022) radius 7.5
  arc A37 (170.4114, -112.0888) -> (170.4114, -78.355) centre (152.9677, -95.2219) ccw
  circle A38 centre (188.5512, -95.2219) radius 11.3188
  arc A39 (212.2282, -102.4979) -> (183.0139, -119.3648) centre (206.3429, -126.0381) ccw
  arc A40 (183.0139, -71.0789) -> (212.2282, -87.9458) centre (206.3429, -64.4056) ccw
  circle A41 centre (188.5512, -95.2219) radius 2.45
  point P0 (183.0139, -119.3648)
  point P1 (212.2282, -87.9458)
  point P2 (183.0139, -71.0789)
  dimension "d0" = 15
  dimension "d2" = 15
  dimension "d1" = 15
  dimension "d5" = 360
  dimension "d12" = 4.9
extrude "Extrusion1" add sketch "Sketch1" along normal blind 3 contours A34 | A34 A40 A38 A37 | A40 A35 A39 A38 | A38 | A38 A39 A36 A37 | A35 | A36
sketch "Sketch2" plane through (0, 0, 0) normal (0, 0, -1) x (-1, 0, 0)
  arc A0 (-183.0139, -119.3648) -> (-212.2282, -102.4979) centre (-206.3429, -126.0381) ccw projected
  arc A1 (-183.0139, -119.3648) -> (-170.4114, -112.0888) centre (-175.8031, -117.3022) ccw projected
  arc A2 (-170.4114, -78.355) -> (-170.4114, -112.0888) centre (-152.9677, -95.2219) ccw projected
  arc A3 (-170.4114, -78.355) -> (-183.0139, -71.0789) centre (-175.8031, -73.1416) ccw projected
  arc A4 (-212.2282, -87.9458) -> (-183.0139, -71.0789) centre (-206.3429, -64.4056) ccw projected
  arc A5 (-212.2282, -87.9458) -> (-212.2282, -102.4979) centre (-214.0473, -95.2219) ccw projected
  circle A6 centre (-214.0473, -95.2219) radius 2.75 projected
  circle A7 centre (-175.8031, -73.1416) radius 2.75 projected
  circle A8 centre (-188.5512, -95.2219) radius 2.45 projected
  circle A9 centre (-175.8031, -117.3022) radius 2.75 projected
  circle A10 centre (-188.5512, -95.2219) radius 7.5
  point P0 (0, 0)
  dimension "d9" = 15
extrude "Extrusion2" add sketch "Sketch2" along normal blind 67 contours A10
fillet "Fillet1" radius 9 1 edges at (196.0512, -95.2219, 0)
properties part number "LED Tower_3DPrint"
